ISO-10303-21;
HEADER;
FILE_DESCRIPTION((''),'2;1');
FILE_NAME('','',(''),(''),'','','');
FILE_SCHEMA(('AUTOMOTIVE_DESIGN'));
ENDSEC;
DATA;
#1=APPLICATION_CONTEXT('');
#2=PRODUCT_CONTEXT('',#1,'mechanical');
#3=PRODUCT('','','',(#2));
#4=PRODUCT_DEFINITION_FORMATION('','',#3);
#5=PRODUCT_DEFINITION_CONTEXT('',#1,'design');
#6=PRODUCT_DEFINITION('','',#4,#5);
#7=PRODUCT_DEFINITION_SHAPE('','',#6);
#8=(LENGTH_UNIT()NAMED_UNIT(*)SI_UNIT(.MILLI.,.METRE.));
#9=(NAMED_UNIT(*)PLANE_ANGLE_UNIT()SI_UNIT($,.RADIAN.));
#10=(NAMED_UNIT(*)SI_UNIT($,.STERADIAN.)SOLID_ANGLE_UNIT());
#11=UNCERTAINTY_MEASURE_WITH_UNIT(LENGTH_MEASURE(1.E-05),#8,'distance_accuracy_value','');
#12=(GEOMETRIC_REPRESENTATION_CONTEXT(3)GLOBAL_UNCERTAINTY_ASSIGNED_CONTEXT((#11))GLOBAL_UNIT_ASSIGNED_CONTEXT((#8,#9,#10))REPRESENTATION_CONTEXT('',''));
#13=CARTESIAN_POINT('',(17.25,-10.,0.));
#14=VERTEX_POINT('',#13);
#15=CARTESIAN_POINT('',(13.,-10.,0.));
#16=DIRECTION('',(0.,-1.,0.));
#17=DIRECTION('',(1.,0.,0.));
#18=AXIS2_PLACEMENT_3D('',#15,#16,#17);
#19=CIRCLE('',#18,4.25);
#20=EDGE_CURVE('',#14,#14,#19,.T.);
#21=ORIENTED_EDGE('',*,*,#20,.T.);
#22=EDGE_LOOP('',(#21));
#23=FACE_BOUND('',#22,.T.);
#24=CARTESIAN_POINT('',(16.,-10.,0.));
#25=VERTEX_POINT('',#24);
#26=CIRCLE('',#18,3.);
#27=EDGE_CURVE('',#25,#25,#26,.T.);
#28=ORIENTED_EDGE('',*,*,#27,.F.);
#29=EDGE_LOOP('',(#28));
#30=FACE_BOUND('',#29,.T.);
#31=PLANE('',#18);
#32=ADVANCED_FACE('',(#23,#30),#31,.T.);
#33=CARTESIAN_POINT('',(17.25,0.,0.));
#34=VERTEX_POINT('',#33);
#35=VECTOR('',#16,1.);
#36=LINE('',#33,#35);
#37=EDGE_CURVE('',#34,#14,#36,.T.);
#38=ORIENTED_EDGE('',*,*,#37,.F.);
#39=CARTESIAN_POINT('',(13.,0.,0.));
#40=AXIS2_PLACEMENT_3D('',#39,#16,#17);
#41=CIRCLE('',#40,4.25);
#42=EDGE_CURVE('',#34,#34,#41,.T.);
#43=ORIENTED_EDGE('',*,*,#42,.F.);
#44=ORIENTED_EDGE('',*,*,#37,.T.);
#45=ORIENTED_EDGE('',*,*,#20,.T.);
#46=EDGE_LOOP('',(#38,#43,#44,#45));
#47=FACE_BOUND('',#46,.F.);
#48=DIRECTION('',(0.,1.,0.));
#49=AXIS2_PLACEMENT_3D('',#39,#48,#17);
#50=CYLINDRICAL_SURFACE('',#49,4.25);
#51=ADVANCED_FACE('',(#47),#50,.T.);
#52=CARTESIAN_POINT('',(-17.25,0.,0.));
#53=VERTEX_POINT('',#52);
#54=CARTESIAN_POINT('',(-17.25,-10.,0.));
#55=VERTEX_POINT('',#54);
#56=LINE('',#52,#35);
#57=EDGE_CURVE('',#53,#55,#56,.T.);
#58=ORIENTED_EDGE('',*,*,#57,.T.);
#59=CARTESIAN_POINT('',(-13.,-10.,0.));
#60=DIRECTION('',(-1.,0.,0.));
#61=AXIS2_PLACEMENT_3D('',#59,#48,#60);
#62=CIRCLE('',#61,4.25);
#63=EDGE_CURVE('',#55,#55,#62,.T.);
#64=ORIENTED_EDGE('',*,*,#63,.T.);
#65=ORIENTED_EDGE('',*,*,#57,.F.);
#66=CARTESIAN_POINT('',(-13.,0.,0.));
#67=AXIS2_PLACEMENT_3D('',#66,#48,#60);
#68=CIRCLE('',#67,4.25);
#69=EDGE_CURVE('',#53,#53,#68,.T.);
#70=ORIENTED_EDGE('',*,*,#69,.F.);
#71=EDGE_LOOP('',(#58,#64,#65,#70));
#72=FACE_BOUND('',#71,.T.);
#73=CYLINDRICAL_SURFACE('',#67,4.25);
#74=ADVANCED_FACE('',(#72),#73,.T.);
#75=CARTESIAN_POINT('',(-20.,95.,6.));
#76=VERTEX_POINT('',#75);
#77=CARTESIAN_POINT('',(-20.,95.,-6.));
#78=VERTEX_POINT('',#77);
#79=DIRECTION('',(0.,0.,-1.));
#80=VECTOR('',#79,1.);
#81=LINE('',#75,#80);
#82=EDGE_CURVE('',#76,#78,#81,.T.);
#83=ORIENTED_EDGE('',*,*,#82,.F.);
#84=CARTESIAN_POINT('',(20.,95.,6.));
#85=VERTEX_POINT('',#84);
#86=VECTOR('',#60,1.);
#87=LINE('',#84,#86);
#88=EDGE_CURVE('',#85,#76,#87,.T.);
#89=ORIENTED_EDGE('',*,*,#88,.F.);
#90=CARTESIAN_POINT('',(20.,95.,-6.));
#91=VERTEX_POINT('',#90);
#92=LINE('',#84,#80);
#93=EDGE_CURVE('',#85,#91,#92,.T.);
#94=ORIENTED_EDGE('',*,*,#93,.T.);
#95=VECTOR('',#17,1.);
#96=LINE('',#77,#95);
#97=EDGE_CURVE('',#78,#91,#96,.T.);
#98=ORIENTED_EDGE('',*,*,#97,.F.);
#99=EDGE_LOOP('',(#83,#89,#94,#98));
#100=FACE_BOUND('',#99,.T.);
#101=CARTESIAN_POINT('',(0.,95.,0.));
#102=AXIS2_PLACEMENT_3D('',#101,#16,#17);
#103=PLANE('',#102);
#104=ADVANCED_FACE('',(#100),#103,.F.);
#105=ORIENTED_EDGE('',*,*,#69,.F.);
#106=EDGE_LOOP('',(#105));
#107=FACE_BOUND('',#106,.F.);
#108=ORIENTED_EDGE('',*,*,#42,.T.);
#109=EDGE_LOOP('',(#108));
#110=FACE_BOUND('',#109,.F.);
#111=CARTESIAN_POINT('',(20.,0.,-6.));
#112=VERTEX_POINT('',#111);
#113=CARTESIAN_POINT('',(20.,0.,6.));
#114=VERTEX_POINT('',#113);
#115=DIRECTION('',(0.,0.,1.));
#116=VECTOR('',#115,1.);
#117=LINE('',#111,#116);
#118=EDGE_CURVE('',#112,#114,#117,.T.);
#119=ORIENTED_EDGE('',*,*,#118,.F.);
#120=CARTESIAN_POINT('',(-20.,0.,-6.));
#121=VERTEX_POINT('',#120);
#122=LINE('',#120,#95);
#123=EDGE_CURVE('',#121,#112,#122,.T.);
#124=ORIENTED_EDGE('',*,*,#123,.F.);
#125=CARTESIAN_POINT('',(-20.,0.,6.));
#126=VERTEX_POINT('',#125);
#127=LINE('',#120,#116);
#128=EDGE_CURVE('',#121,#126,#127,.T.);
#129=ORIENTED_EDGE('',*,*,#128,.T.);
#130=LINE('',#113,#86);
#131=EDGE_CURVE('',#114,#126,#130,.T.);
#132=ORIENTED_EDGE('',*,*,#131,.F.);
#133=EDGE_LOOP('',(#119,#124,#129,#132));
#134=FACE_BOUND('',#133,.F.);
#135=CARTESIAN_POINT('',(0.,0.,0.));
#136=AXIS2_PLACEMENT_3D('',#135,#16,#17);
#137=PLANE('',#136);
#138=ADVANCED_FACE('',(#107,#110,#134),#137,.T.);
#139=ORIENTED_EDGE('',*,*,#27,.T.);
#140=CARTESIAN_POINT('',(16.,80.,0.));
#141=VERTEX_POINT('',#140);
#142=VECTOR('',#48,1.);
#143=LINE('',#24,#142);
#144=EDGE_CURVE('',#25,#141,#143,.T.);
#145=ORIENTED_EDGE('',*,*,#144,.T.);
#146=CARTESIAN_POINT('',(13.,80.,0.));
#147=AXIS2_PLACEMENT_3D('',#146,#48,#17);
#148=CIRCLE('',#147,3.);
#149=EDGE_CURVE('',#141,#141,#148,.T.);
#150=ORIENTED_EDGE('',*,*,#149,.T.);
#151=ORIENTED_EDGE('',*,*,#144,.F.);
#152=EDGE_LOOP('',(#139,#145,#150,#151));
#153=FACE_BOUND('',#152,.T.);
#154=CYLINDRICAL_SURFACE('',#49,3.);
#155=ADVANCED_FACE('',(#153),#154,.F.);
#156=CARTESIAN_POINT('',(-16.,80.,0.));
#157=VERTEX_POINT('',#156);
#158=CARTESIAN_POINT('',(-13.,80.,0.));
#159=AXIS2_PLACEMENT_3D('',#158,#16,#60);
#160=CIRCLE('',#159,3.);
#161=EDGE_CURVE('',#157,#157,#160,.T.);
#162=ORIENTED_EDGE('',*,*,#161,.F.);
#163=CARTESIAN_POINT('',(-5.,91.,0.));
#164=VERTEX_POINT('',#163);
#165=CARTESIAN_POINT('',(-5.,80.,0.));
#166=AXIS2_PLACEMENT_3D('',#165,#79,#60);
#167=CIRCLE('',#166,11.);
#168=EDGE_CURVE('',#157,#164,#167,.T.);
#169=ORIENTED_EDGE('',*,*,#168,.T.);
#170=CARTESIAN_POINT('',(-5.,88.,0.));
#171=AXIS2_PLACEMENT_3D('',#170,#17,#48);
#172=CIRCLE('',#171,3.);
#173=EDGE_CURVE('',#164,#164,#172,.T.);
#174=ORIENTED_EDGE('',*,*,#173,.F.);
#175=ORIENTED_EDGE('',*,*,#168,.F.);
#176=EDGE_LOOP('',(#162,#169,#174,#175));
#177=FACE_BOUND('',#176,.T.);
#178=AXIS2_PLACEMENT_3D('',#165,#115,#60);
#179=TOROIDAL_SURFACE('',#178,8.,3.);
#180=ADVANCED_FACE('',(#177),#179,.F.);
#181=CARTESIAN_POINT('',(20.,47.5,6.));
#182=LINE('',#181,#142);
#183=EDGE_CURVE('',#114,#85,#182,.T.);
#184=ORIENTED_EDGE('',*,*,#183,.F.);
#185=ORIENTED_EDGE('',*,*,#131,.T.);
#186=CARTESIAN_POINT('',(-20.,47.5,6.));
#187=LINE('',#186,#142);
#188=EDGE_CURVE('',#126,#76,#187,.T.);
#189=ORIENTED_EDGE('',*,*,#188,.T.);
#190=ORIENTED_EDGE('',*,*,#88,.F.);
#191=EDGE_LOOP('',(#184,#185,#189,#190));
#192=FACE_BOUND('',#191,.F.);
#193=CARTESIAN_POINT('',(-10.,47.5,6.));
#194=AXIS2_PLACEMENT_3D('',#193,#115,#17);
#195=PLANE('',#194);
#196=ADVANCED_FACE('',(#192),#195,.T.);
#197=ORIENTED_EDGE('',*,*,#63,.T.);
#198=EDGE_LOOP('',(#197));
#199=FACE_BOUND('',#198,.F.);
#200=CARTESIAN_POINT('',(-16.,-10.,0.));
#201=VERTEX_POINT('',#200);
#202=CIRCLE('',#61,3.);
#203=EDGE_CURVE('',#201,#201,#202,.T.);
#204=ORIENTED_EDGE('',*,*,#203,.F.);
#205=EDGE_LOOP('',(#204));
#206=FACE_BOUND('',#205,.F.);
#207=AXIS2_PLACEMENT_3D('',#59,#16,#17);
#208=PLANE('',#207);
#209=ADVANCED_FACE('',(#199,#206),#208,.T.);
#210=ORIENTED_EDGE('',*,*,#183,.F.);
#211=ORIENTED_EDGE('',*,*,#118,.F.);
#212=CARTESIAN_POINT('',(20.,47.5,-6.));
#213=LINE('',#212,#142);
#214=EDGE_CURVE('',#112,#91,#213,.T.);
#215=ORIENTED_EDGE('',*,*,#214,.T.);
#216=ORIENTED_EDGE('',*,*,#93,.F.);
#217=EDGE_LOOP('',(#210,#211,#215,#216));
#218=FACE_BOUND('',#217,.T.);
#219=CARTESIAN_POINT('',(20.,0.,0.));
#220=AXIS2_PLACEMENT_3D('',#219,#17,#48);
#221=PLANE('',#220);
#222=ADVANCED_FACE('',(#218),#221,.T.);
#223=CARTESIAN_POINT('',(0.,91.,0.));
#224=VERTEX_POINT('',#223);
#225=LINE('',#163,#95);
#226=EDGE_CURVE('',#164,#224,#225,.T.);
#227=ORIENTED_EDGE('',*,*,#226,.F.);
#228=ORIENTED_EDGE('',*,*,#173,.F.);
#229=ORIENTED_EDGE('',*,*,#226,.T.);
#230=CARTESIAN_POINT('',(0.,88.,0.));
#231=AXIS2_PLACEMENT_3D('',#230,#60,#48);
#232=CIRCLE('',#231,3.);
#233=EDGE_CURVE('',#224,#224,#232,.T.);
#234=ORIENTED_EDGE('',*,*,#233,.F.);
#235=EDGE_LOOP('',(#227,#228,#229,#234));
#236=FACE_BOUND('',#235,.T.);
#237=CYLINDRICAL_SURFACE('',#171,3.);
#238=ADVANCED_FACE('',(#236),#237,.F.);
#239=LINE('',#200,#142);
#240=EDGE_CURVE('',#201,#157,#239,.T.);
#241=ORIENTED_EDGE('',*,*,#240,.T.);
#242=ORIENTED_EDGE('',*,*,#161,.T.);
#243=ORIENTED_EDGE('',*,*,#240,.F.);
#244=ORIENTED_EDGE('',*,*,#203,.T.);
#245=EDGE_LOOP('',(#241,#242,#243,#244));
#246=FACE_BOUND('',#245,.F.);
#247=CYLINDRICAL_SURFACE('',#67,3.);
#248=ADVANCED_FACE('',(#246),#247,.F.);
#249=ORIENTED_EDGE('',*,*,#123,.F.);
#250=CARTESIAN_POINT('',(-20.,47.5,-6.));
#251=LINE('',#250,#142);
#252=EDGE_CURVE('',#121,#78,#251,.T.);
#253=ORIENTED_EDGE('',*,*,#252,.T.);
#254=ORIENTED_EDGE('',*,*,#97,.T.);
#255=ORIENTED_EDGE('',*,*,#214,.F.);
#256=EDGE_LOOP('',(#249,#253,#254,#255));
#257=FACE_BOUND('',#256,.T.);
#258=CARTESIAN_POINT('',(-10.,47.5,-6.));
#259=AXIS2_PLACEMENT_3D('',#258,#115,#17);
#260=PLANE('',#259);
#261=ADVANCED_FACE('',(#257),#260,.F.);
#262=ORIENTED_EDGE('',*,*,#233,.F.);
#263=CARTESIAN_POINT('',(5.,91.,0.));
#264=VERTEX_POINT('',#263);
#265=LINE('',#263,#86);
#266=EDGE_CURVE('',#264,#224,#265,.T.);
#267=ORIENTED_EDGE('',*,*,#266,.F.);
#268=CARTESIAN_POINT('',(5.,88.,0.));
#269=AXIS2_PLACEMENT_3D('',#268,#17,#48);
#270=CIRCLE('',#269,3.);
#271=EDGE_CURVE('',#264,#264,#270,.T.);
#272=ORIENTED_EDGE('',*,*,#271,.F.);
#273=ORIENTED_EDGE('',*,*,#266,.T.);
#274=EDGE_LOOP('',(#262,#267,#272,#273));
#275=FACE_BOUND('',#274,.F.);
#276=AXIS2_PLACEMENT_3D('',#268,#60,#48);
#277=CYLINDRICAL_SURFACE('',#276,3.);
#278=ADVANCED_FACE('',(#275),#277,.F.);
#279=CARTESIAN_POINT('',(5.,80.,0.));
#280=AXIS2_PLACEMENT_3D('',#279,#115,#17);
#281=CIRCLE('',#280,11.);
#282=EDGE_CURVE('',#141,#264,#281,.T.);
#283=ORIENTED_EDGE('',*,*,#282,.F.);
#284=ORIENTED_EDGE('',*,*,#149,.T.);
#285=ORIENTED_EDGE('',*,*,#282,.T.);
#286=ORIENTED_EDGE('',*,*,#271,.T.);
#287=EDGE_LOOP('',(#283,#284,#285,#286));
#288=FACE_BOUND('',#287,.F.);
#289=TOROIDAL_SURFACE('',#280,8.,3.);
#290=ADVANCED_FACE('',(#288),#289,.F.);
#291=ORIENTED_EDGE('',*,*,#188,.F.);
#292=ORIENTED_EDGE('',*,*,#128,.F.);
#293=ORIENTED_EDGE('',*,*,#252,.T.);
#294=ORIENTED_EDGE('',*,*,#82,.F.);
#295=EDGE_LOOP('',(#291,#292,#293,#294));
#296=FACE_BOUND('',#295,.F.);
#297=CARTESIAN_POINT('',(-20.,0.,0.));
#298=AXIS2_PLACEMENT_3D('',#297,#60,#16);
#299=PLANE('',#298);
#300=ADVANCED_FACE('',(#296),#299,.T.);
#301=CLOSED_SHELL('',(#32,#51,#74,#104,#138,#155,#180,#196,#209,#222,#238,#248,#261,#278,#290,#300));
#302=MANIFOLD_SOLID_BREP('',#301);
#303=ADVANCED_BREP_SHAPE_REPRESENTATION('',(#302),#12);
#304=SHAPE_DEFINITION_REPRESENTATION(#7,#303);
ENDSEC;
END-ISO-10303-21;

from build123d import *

# Parameters (mm, degrees)
F0_W     = 20
F0_H     = 95
F1_DEPTH = 6
F3_R     = 3
F5_R     = 4.25
F5_R_2   = 3
F6_DEPTH = 10


with BuildPart() as f1:
    # F0 (on Top) → F1 (new body, symmetric)
    with BuildSketch(Plane.XY):
        with Locations((10, 47.5)):
            Rectangle(F0_W, F0_H)
    extrude(amount=F1_DEPTH, both=True)

    # F4: sweep along a path in F2
    with BuildLine(Plane.XY) as f4_path:
        Line((13, 0), (13, 80))
        ThreePointArc((13, 80), (10.6568542495, 85.6568542495), (5, 88))
        Line((5, 88), (0, 88))
    # F3 (on face) → F4 (sweep, cut)
    with BuildSketch(Plane.XZ):
        with Locations((13, 0)):
            Circle(F3_R)
    sweep(path=f4_path.line, mode=Mode.SUBTRACT)

    # F5 (on face) → F6 (join)
    with BuildSketch(Plane.XZ):
        with Locations((13, 0)):
            Circle(F5_R)
        with Locations((13, 0)):
            Circle(F5_R_2, mode=Mode.SUBTRACT)
    extrude(amount=F6_DEPTH)

    # F7: F1 across face


with BuildPart() as f1_1:
    add(f1.part)
    add(f1.part.mirror(Plane(origin=(0, 46.4699702389, 0), x_dir=(0, -1, 0), z_dir=(-1, 0, 0))))


solid = f1_1.part
